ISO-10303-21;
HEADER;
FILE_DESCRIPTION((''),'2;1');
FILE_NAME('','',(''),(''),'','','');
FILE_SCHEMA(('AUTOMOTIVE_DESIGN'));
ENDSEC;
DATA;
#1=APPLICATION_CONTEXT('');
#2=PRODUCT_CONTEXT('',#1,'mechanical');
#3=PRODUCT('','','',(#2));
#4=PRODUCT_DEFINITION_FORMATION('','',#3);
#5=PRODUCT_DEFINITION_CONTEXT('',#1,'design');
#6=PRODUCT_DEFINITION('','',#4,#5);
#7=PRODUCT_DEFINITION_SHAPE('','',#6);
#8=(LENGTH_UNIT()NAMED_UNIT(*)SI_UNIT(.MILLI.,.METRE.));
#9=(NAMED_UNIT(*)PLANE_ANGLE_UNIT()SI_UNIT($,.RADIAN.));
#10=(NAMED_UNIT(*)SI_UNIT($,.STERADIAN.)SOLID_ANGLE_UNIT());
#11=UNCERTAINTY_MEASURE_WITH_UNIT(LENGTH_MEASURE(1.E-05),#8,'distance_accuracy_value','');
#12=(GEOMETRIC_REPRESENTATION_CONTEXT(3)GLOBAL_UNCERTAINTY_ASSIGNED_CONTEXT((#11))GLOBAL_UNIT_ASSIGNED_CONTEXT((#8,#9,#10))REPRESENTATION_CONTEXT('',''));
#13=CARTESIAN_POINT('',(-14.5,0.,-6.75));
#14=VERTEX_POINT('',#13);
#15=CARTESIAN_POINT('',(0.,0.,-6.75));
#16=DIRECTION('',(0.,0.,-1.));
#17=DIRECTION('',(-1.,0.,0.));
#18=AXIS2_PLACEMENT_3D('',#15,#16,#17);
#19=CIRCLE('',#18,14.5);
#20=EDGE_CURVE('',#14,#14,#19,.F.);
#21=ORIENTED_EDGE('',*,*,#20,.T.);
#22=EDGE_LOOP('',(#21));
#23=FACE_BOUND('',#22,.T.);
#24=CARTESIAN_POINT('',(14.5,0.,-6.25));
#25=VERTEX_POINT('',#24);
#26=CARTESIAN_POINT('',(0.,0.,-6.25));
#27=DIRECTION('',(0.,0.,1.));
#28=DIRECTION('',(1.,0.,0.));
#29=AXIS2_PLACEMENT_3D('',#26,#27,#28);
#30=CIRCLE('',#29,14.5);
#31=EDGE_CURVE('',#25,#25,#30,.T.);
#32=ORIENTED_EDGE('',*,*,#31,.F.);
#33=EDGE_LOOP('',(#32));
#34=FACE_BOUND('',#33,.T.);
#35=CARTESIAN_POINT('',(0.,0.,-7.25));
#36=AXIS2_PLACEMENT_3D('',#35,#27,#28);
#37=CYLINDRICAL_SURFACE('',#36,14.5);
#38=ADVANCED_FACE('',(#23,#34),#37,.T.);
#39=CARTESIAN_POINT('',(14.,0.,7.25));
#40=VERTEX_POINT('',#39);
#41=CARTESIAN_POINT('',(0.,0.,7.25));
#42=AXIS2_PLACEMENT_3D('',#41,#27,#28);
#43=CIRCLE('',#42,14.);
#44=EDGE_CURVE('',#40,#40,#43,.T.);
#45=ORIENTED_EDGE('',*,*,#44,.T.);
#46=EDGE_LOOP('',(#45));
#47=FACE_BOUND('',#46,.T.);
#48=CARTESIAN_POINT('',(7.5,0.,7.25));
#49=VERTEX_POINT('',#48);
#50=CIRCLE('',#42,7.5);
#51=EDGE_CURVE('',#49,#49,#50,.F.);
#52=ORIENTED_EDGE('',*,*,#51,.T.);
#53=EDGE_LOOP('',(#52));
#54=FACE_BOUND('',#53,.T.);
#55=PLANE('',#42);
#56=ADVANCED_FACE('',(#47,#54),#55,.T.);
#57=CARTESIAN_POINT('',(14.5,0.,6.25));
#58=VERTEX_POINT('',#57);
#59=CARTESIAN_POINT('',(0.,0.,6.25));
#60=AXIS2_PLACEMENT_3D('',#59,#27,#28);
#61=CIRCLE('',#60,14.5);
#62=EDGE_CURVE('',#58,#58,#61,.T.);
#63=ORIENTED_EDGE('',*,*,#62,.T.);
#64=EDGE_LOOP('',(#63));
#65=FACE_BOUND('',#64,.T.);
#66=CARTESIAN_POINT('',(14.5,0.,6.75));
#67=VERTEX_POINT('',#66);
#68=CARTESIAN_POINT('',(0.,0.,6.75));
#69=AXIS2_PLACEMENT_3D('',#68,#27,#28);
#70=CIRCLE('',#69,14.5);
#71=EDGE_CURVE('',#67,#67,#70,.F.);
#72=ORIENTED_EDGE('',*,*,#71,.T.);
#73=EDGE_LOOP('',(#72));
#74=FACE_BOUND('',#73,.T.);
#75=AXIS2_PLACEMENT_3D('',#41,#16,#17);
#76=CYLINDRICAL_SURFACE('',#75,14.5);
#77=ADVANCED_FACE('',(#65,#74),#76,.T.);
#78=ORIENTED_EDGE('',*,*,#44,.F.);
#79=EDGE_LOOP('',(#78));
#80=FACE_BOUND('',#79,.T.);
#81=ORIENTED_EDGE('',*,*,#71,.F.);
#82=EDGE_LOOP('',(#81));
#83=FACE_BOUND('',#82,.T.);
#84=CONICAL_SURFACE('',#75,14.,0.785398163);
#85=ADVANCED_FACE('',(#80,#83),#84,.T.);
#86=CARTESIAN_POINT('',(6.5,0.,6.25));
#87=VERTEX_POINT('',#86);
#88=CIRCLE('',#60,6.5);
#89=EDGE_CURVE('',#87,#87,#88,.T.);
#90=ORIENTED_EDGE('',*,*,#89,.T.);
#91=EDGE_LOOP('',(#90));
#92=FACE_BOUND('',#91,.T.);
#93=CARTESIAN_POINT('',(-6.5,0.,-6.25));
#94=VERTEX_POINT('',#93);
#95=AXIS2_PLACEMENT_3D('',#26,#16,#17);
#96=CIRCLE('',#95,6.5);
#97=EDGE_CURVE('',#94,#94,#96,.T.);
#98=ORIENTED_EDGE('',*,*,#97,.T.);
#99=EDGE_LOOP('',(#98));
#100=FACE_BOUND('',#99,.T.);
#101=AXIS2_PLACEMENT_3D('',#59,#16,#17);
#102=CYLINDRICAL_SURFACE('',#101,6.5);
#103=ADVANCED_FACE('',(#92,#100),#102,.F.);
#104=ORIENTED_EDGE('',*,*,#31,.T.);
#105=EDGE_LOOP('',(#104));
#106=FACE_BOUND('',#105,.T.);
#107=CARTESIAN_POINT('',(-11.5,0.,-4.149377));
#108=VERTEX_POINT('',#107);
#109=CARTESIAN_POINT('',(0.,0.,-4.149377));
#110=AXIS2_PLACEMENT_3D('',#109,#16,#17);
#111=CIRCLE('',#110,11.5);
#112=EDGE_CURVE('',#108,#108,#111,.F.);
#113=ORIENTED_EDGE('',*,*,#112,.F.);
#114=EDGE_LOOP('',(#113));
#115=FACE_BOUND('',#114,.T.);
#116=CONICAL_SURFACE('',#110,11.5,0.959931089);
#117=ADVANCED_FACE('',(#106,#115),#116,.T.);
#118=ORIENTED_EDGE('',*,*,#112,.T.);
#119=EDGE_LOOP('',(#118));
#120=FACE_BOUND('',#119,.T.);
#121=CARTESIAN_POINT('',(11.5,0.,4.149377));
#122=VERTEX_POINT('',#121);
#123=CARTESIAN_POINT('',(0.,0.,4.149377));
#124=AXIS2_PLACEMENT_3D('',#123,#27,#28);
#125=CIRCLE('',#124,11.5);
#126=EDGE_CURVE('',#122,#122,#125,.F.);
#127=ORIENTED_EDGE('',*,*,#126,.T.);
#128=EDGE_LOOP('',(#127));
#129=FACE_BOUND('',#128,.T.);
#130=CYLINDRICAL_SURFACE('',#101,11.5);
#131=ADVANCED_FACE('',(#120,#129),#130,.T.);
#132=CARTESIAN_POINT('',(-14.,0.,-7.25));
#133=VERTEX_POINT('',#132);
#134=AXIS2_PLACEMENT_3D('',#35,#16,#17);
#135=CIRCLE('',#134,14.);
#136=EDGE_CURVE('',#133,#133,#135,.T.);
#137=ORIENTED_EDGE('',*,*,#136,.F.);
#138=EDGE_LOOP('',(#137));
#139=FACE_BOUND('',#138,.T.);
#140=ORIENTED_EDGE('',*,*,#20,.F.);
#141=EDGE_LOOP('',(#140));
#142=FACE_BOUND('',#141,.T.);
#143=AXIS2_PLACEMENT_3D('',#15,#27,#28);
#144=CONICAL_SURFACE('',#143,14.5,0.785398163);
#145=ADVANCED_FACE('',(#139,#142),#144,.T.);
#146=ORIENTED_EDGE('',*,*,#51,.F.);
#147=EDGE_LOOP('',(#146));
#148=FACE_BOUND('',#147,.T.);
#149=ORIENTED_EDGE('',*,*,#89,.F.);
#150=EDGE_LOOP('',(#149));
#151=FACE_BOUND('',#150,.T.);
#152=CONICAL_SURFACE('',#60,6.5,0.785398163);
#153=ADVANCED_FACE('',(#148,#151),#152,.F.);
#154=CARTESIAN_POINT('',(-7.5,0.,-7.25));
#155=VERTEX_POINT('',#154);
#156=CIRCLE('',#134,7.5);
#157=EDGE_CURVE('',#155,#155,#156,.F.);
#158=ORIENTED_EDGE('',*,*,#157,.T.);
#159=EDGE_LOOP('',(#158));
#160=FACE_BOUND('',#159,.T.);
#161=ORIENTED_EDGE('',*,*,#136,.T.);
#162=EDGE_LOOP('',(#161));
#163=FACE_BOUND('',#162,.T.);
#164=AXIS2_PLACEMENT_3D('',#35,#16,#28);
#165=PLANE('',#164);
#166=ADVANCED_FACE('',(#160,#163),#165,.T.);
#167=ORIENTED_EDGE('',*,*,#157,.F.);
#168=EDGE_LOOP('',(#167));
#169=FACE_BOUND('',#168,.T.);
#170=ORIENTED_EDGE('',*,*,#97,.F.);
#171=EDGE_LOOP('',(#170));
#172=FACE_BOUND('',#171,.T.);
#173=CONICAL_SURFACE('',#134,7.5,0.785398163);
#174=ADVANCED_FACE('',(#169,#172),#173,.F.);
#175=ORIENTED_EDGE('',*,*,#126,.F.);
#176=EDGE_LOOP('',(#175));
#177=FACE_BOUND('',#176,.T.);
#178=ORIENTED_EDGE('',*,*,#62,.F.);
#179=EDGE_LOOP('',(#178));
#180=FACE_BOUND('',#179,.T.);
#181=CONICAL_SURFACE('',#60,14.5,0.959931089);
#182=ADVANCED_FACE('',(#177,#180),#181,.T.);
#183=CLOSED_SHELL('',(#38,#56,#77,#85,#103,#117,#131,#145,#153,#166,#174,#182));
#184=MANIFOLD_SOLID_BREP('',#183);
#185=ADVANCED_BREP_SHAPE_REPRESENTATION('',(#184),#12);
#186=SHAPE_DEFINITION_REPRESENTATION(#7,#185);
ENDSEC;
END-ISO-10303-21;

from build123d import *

# Parameters (mm, degrees)
SKETCH1_R           = 11.5
SKETCH1_R_2         = 6.5
BOSS_EXTRUDE1_DEPTH = 6.25
SKETCH2_R           = 14.5
SKETCH2_R_2         = 6.5
BOSS_EXTRUDE2_DEPTH = 1
CHAMFER1_SIZE       = 2.100622615
CHAMFER1_SIZE_2     = 3
CHAMFER2_SIZE       = 1
CHAMFER3_SIZE       = 0.5


with BuildPart() as part:
    # Sketch1 → Boss-Extrude1 (new, symmetric)
    with BuildSketch(Plane.XY):
        Circle(SKETCH1_R)
        Circle(SKETCH1_R_2, mode=Mode.SUBTRACT)
    extrude(amount=BOSS_EXTRUDE1_DEPTH, both=True)

    # Sketch2 → Boss-Extrude2 (add)
    with BuildSketch(Plane.XY.offset(6.25)):
        Circle(SKETCH2_R)
        Circle(SKETCH2_R_2, mode=Mode.SUBTRACT)
    boss_extrude2 = extrude(amount=BOSS_EXTRUDE2_DEPTH)

    # Mirror1: Boss-Extrude2 across plane
    add(boss_extrude2.mirror(Plane.XY))

    # Chamfer1
    # the kernel refuses this chamfer: 3, 2.100622615 mm, written as the material it adds along each edge
    with BuildSketch(Plane(origin=(0, 0, -6.25), x_dir=(1, 0, 0), z_dir=(0, -1, 0))) as chamfer1_piece_1_section:
        Polygon((11.5, CHAMFER1_SIZE), (11.5 + CHAMFER1_SIZE_2, 0), (11.5, 0), align=None)
    chamfer1_piece_1 = revolve(axis=Axis((0, 0, -6.25), (0, 0, 1)), mode=Mode.PRIVATE)
    chamfer1_piece_1 = chamfer1_piece_1 & Plane(origin=(0, 0, -5.218650002), x_dir=(1, 0, 0), z_dir=(0, 0, 1)) * Cylinder(14.5, 58, mode=Mode.PRIVATE)
    add(chamfer1_piece_1)
    with BuildSketch(Plane(origin=(0, 0, 6.25), x_dir=(1, 0, 0), z_dir=(0, -1, 0))) as chamfer1_piece_2_section:
        Polygon((11.5, -CHAMFER1_SIZE), (11.5 + CHAMFER1_SIZE_2, 0), (11.5, 0), align=None)
    chamfer1_piece_2 = revolve(axis=Axis((0, 0, 6.25), (0, 0, 1)), mode=Mode.PRIVATE)
    chamfer1_piece_2 = chamfer1_piece_2 & Plane(origin=(0, 0, 5.218650002), x_dir=(1, 0, 0), z_dir=(0, 0, -1)) * Cylinder(14.5, 58, mode=Mode.PRIVATE)
    add(chamfer1_piece_2)

    # Chamfer2
    chamfer2_edges = [part.edges().sort_by_distance(p)[0] for p in [
        (-6.5, 0, 7.25),
        (-6.5, 0, -7.25),
    ]]
    chamfer(chamfer2_edges, length=CHAMFER2_SIZE)

    # Chamfer3
    chamfer3_edges = [part.edges().sort_by_distance(p)[0] for p in [
        (-14.5, 0, 7.25),
        (-14.5, 0, -7.25),
    ]]
    chamfer(chamfer3_edges, length=CHAMFER3_SIZE)


solid = part.part
